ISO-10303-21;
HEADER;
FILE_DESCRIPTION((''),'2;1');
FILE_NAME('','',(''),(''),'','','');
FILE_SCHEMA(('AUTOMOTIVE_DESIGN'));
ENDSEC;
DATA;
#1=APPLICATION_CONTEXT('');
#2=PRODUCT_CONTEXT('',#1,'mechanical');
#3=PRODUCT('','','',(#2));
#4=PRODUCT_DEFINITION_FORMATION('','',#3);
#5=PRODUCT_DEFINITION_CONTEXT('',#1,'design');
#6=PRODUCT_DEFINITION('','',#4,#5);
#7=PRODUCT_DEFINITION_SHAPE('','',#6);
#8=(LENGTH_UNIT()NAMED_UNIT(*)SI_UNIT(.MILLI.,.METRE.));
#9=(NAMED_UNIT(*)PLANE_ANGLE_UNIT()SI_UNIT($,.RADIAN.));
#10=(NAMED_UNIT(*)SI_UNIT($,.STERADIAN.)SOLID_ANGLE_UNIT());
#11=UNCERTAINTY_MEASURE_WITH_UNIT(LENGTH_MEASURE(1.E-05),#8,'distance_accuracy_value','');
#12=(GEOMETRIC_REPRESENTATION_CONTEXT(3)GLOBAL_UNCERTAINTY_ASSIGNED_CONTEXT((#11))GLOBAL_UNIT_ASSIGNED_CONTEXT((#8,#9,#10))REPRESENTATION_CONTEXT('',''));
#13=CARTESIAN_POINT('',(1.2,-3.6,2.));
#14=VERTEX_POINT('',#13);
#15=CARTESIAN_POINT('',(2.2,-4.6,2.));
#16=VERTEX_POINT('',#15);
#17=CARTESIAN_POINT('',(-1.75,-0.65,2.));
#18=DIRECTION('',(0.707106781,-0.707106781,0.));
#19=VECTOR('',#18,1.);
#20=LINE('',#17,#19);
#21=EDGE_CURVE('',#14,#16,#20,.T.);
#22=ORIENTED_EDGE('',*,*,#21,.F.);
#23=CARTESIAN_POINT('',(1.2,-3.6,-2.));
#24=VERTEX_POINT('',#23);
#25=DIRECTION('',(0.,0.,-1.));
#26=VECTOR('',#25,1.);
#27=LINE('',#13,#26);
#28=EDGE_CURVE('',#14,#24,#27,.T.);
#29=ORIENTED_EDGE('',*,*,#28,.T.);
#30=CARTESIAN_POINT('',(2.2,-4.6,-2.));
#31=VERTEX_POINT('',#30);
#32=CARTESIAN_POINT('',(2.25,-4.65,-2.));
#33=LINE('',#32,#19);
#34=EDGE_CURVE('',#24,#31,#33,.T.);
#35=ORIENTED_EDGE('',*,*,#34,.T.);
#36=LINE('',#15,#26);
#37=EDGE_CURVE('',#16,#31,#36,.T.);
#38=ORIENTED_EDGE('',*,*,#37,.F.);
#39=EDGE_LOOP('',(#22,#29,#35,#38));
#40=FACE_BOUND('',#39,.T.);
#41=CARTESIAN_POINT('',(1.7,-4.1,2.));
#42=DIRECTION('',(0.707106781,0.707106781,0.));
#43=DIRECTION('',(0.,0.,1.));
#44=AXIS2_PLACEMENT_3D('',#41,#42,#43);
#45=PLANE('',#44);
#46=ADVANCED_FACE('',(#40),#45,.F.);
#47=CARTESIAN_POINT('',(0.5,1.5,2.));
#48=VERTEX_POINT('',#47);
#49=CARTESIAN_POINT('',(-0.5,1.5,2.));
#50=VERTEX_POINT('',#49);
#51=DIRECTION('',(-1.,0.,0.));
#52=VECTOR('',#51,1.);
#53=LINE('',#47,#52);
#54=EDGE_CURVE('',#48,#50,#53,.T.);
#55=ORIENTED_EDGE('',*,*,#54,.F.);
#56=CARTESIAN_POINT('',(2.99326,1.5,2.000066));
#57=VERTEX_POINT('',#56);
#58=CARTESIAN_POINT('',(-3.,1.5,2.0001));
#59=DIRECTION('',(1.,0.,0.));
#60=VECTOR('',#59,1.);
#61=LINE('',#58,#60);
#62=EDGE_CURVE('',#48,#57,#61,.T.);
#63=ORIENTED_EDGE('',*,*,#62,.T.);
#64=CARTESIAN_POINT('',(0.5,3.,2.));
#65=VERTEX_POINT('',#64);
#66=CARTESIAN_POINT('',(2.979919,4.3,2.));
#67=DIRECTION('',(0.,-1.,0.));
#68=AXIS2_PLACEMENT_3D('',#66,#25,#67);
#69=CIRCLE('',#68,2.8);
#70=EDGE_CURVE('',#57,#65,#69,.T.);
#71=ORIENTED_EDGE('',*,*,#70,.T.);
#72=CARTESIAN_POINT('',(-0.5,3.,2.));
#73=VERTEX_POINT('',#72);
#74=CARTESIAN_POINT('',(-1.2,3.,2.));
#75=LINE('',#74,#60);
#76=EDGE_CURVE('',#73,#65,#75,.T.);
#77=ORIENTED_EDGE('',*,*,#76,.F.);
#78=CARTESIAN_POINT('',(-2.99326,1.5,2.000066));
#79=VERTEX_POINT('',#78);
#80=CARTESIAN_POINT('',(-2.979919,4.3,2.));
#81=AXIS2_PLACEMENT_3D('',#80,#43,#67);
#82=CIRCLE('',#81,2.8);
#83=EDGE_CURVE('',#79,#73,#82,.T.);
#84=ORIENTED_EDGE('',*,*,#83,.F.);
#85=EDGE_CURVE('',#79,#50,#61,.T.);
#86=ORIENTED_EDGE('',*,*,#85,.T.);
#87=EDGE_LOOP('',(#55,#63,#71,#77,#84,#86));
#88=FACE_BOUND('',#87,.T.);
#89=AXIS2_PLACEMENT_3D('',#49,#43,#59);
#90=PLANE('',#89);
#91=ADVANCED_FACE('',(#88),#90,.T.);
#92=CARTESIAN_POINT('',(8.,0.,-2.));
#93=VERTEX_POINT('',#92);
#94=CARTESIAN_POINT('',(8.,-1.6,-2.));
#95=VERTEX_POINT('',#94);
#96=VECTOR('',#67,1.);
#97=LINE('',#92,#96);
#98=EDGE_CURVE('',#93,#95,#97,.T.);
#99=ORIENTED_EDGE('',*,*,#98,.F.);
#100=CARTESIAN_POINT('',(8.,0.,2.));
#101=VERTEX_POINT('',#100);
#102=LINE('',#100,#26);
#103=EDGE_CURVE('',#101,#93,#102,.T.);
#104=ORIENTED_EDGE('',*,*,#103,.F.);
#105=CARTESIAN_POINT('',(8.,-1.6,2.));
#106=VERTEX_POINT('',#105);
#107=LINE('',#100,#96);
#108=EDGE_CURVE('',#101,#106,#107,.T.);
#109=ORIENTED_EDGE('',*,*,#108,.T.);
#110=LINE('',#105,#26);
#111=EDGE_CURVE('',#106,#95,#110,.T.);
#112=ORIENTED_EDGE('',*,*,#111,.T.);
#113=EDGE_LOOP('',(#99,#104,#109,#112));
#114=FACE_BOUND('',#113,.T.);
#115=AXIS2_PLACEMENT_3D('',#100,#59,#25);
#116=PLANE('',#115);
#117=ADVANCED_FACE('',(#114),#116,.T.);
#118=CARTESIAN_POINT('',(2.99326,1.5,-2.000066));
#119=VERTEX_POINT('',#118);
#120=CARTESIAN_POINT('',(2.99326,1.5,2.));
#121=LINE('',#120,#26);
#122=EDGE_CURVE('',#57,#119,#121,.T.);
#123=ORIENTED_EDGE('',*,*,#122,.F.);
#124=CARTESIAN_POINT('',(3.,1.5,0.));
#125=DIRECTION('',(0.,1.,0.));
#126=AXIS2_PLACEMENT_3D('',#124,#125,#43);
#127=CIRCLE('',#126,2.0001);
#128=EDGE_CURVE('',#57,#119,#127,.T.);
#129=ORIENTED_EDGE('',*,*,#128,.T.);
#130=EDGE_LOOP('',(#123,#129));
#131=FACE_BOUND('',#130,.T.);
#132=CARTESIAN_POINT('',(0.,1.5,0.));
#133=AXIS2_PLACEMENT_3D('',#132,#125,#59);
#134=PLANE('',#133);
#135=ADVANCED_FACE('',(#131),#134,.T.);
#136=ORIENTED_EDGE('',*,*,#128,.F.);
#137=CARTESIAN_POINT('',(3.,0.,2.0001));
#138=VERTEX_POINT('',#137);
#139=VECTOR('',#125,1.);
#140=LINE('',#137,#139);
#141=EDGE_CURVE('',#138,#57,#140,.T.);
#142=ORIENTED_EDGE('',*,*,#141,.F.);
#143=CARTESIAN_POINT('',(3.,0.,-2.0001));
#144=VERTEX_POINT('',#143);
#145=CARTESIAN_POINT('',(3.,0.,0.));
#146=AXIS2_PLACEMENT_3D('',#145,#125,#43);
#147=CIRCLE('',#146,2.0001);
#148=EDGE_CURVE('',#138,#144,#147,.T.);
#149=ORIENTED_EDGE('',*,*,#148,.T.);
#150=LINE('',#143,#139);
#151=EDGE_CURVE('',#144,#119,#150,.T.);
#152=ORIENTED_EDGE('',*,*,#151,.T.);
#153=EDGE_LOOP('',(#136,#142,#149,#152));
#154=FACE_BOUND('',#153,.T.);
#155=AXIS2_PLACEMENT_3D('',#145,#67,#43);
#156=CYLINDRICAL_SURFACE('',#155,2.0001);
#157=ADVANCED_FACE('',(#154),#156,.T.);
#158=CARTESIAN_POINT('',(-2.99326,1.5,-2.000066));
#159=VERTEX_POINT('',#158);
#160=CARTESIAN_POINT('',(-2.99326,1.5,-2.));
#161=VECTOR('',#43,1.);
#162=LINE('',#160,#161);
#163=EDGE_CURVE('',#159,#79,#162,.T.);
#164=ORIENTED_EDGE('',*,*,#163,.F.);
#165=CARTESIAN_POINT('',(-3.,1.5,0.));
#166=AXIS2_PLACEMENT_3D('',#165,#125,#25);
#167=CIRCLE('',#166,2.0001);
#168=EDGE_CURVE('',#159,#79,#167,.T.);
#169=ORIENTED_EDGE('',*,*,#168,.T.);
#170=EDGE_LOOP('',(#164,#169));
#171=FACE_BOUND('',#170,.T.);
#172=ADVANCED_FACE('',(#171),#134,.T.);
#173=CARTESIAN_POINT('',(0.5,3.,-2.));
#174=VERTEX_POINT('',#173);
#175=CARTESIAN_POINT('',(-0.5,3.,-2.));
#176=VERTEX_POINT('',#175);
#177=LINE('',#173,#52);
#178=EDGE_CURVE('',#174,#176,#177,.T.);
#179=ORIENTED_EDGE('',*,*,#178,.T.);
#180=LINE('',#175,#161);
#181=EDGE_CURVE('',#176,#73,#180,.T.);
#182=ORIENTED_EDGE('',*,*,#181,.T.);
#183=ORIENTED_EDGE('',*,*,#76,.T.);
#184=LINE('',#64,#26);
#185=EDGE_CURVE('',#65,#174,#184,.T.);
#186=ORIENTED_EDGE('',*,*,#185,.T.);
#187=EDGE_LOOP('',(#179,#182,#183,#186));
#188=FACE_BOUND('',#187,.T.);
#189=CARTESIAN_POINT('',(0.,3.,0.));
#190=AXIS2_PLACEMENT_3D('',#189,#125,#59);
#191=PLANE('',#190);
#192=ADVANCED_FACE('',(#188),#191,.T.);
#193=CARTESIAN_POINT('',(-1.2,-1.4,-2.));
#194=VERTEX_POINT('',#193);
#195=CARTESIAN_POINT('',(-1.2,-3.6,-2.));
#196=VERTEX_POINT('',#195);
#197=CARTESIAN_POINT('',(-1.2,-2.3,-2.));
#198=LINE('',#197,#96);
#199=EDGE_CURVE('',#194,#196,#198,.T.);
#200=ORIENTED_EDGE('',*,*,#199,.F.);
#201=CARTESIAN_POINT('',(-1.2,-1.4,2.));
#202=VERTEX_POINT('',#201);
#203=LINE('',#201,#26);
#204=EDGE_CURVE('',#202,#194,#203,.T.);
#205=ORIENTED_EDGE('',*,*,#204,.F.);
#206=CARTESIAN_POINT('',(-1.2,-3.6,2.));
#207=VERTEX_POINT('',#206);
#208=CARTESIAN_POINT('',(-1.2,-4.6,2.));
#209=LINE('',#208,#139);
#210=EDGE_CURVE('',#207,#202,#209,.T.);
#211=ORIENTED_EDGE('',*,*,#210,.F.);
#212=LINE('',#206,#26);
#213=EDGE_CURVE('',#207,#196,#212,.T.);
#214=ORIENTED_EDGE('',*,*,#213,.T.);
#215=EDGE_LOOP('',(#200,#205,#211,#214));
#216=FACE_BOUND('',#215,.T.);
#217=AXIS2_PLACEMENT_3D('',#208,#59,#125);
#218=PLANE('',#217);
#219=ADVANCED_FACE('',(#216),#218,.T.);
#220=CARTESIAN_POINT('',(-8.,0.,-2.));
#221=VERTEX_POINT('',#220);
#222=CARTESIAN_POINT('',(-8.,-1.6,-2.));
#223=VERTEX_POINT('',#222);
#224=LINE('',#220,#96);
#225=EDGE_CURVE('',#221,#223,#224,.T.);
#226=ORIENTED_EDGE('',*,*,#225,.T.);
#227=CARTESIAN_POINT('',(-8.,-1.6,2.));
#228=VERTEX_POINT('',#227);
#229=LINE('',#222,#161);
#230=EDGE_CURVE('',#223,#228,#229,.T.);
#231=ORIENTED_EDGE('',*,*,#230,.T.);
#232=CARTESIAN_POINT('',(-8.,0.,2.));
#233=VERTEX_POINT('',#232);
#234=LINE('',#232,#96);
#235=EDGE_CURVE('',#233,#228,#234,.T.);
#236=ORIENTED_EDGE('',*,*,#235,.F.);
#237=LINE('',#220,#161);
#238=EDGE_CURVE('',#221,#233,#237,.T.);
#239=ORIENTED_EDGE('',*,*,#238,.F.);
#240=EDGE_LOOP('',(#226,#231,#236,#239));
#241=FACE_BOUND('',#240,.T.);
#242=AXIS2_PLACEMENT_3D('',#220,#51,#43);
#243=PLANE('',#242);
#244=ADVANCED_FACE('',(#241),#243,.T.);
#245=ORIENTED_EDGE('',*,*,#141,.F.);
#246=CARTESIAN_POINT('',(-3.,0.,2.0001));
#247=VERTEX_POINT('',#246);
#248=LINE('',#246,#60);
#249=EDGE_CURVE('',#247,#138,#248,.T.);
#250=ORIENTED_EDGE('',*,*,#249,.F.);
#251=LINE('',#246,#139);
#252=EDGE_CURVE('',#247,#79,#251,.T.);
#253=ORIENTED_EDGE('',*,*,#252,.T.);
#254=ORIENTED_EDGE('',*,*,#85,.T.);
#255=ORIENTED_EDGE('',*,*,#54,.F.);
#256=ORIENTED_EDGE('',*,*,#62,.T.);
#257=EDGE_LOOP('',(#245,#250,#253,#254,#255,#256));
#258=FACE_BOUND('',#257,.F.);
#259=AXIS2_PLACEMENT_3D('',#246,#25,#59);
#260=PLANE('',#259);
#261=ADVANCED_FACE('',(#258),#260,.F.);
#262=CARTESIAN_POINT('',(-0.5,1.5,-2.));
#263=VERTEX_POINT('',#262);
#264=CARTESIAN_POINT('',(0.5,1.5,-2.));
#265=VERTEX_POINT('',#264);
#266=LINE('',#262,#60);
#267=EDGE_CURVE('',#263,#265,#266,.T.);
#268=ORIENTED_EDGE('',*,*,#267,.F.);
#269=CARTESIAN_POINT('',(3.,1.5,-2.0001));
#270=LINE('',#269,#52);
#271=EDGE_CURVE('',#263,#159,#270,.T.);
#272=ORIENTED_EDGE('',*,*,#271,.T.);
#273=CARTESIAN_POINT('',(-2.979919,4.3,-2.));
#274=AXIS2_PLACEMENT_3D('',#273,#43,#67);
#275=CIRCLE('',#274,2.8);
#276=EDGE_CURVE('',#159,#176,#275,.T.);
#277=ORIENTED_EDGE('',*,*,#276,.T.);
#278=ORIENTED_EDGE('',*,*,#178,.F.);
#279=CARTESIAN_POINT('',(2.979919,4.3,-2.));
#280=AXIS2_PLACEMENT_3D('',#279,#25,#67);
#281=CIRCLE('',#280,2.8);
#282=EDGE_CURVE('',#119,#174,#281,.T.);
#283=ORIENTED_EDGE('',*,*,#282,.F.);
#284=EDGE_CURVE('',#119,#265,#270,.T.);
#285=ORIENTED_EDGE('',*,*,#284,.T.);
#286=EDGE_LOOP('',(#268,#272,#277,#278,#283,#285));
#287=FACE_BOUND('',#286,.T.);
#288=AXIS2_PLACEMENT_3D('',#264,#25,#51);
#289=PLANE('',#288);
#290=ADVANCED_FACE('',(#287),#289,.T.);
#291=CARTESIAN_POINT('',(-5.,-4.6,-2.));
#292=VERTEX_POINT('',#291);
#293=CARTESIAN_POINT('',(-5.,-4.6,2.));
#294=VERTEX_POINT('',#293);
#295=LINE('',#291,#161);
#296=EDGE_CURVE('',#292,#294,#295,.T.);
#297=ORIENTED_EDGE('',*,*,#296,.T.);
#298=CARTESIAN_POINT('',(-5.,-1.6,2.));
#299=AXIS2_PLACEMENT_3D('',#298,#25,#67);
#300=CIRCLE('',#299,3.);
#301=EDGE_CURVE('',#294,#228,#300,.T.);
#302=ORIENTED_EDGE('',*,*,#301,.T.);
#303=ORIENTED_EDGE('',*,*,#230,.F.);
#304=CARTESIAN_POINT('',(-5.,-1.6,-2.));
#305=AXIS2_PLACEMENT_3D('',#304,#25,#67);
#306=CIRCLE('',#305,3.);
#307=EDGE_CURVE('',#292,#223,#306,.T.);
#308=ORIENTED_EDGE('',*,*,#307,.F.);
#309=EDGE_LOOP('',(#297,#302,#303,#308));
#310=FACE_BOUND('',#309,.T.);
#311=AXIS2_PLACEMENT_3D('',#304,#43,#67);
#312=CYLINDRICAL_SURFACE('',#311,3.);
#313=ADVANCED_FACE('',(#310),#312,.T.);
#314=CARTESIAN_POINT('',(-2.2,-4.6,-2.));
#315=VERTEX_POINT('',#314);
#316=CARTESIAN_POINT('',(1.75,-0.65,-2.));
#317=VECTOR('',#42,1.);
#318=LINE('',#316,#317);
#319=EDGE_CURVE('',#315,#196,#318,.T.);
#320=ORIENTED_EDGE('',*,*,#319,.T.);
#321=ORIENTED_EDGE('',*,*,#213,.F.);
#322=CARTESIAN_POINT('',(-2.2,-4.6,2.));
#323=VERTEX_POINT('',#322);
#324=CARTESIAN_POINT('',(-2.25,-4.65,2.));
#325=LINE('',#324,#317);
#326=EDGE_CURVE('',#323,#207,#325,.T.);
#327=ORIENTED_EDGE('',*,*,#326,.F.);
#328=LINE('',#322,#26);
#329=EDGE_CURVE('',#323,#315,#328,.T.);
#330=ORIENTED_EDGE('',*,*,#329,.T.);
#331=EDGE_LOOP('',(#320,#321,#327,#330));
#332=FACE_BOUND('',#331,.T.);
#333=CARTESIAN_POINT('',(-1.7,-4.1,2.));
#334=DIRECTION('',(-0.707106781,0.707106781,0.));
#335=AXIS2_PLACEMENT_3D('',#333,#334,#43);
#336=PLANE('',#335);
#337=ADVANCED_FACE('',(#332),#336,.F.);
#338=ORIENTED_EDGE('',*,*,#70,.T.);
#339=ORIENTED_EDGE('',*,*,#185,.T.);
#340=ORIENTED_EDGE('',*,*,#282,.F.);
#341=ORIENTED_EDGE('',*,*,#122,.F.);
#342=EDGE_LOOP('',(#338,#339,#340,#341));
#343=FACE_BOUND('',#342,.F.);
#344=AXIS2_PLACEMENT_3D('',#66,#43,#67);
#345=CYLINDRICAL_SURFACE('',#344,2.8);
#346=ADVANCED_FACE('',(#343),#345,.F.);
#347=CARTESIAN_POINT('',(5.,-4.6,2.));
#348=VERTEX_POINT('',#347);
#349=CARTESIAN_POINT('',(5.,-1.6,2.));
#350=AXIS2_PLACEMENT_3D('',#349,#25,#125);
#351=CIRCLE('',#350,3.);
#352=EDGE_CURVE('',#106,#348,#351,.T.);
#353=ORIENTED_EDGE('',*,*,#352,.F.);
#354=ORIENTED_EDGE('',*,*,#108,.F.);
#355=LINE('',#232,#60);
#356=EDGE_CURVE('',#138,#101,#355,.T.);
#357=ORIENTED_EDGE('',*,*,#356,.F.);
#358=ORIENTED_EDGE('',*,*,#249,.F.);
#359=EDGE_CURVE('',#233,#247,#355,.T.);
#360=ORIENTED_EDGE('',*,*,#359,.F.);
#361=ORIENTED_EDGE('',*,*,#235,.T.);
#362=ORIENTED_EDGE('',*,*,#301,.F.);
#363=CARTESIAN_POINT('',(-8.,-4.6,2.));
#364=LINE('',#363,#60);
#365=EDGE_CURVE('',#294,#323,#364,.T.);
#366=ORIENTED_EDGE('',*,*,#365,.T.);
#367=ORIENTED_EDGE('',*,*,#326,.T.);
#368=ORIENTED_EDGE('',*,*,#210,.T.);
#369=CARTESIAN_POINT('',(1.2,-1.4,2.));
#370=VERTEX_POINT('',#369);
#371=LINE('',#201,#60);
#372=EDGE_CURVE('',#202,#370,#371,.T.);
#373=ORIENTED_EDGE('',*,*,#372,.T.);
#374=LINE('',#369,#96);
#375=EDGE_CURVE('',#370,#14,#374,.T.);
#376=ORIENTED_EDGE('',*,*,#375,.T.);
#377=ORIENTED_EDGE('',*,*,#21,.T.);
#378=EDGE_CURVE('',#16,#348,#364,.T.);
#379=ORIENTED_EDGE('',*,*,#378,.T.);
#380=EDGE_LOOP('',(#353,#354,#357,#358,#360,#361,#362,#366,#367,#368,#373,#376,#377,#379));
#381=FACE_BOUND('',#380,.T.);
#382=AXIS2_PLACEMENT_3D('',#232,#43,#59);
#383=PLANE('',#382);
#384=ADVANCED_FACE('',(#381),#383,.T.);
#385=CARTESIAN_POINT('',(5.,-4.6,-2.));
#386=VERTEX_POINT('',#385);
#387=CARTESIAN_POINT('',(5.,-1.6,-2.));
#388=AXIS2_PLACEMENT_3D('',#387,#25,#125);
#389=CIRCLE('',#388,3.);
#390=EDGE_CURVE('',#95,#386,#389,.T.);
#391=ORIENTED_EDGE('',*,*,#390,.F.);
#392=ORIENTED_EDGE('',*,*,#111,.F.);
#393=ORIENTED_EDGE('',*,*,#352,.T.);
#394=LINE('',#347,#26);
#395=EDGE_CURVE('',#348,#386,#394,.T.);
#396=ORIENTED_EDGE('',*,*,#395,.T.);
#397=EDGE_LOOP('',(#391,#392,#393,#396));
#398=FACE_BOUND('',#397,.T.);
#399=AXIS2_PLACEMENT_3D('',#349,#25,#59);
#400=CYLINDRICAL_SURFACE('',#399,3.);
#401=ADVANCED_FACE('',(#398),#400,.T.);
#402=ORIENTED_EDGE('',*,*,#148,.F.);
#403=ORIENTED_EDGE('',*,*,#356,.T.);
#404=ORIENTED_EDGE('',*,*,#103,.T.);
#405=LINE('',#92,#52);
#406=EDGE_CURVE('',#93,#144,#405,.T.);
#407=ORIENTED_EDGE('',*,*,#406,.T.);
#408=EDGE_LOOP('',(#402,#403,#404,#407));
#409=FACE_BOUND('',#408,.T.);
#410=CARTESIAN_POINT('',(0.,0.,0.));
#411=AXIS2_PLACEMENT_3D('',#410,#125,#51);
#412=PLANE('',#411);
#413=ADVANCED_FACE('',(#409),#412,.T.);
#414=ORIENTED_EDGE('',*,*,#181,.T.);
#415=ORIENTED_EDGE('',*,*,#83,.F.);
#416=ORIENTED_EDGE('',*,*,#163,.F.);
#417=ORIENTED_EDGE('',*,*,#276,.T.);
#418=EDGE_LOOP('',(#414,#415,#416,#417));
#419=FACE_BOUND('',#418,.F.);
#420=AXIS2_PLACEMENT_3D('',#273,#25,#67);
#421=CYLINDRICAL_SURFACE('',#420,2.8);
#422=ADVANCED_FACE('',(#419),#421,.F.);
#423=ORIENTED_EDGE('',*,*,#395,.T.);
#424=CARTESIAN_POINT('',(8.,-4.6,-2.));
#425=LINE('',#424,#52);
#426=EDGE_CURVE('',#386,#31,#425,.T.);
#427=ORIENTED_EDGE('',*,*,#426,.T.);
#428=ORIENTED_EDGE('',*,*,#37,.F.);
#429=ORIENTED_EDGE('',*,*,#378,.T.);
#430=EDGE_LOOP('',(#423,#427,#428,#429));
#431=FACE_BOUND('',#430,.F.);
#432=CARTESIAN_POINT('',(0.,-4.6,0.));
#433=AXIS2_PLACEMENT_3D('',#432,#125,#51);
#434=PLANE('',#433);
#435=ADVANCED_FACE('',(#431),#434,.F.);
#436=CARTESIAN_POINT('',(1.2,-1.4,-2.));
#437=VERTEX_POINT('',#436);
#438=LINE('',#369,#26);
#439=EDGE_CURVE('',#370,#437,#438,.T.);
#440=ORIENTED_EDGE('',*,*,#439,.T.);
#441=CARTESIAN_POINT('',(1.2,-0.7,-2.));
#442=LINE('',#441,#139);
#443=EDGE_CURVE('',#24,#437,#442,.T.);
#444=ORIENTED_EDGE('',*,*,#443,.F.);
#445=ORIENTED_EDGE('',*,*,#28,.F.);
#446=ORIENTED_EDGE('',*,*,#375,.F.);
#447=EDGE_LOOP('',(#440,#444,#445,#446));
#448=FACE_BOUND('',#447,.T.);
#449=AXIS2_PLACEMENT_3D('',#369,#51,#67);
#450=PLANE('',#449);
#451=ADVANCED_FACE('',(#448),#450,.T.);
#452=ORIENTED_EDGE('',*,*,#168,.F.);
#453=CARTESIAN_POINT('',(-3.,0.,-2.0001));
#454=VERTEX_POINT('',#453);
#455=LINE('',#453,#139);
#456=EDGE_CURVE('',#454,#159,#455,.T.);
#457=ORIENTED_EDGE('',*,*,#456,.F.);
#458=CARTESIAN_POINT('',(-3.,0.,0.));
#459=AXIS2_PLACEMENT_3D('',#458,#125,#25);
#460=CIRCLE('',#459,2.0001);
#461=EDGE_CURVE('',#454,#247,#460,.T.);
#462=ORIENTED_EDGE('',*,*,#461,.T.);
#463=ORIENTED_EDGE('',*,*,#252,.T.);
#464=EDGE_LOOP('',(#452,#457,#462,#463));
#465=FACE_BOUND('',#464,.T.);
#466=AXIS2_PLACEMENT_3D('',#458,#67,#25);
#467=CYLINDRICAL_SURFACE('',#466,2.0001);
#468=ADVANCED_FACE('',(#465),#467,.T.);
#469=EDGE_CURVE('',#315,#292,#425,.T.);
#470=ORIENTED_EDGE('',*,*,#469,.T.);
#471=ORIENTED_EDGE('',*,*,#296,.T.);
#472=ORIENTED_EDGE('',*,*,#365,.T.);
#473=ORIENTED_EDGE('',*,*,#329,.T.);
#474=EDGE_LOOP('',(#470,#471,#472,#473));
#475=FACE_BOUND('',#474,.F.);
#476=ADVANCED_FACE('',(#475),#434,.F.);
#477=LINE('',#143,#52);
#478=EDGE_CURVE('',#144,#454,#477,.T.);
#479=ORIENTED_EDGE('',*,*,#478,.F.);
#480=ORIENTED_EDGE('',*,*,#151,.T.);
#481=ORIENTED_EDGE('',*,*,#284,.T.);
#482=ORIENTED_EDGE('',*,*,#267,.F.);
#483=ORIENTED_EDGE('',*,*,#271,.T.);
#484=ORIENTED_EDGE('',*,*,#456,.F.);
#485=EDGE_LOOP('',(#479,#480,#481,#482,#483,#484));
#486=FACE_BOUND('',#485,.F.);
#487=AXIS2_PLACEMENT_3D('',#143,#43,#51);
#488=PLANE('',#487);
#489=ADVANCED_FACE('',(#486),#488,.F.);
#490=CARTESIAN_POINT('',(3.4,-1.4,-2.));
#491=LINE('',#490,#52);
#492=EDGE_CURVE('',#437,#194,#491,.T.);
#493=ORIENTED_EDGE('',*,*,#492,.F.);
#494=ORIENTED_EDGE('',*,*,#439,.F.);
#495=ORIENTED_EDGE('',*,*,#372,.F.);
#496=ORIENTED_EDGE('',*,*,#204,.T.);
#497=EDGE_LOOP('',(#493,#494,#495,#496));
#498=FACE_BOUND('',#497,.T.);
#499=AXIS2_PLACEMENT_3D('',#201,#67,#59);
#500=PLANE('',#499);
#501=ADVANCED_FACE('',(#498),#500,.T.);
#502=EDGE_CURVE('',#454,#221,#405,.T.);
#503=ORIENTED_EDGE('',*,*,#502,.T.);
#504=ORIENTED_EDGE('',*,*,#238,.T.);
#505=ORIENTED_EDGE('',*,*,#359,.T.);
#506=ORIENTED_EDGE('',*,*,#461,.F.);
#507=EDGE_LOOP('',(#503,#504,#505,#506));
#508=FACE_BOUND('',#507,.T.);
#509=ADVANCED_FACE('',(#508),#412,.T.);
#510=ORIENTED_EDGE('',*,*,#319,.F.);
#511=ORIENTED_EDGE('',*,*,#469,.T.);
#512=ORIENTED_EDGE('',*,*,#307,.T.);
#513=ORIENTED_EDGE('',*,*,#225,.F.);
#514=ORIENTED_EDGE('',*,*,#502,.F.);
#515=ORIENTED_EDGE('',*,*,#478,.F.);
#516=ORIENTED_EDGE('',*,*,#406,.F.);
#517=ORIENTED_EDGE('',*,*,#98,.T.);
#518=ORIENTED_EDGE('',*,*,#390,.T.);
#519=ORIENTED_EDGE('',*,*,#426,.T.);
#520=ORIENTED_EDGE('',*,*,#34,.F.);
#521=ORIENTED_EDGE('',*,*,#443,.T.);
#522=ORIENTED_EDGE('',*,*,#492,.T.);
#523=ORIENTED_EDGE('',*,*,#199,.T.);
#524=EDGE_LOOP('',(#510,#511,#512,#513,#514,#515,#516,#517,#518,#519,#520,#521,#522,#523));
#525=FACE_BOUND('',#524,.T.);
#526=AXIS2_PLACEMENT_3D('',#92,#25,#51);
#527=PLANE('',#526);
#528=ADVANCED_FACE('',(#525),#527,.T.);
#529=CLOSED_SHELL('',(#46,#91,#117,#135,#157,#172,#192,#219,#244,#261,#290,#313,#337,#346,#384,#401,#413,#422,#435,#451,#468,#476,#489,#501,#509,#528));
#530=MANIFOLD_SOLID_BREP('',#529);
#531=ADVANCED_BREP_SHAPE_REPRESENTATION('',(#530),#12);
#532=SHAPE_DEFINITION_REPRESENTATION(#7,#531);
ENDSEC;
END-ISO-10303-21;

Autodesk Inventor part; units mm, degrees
ref_plane "YZ Plane" through (0, 0, 0) normal (1, 0, 0) x (0, 1, 0)
ref_plane "XZ Plane" through (0, 0, 0) normal (0, 1, 0) x (-1, 0, 0)
ref_plane "XY Plane" through (0, 0, 0) normal (0, 0, 1) x (1, 0, 0)
sketch "Sketch1" plane through (0, 0, 0) normal (0, 1, 0) x (-1, 0, 0)
  line L0 (8, 2) -> (-8, 2)
  line L1 (-8, 2) -> (-8, -2)
  line L2 (-8, -2) -> (8, -2)
  line L3 (8, -2) -> (8, 2)
  line L4 (11.2, 0) -> (-11.2, 0) construction
  line L5 (0, -2.8) -> (0, 2.8) construction
  point P0 (0, 0)
  dimension "d0" = 16
  dimension "d1" = 4
extrude "Extrusion1" add sketch "Sketch1" against normal blind 4.6
sketch "Sketch2" plane through (-8, 0, 2) normal (0, 0, 1) x (1, 0, 0)
  line L0 (6.8, -1.4) -> (9.2, -1.4)
  line L1 (9.2, -1.4) -> (9.2, -4.6)
  line L2 (9.2, -4.6) -> (6.8, -4.6)
  line L3 (6.8, -4.6) -> (6.8, -1.4)
  line L4 (16, -4.6) -> (0, -4.6) projected
  point P0 (8, 0)
  point P1 (8, -4.6)
  point P2 (8, -4.6)
  dimension "d4" = 2.4
  dimension "d5" = 3.2
extrude "Extrusion2" cut sketch "Sketch2" against normal through all
chamfer "Chamfer1" distance 1 angle 45 2 edges at (-1.2, -4.6, 0) (1.2, -4.6, 0)
fillet "Fillet1" radius 3 2 edges at (-8, -4.6, 0) (8, -4.6, 0)
sketch "Sketch3" plane through (0, 0, 0) normal (0, 1, 0) x (1, 0, 0)
  line L0 (-3, 0) -> (3, 0) construction
  line L1 (-3, -2.0001) -> (3, -2.0001)
  line L2 (3, 2.0001) -> (-3, 2.0001)
  arc A0 (-3, 2.0001) -> (-3, -2.0001) centre (-3, 0) ccw
  arc A1 (3, -2.0001) -> (3, 2.0001) centre (3, 0) ccw
  point P0 (0, 0)
  dimension "d12" = 3
extrude "Extrusion3" add sketch "Sketch3" along normal blind 1.5
sketch "Sketch4" plane through (0, 1.5, 0) normal (0, 1, 0) x (1, 0, 0)
  line L0 (-1.2, -2) -> (1.2, -2) projected
  line L1 (0.5, 2) -> (-0.5, 2)
  line L2 (-0.5, 2) -> (-0.5, -2)
  line L3 (-0.5, -2) -> (0.5, -2)
  line L4 (0.5, -2) -> (0.5, 2)
  line L5 (0.5, 2) -> (-0.5, -2) construction
  line L6 (-0.5, 2) -> (0.5, -2) construction
  point P0 (0, 0)
  dimension "d15" = 1
extrude "Extrusion4" add sketch "Sketch4" along normal blind 1.5
fillet "Fillet2" radius 2.8 2 edges at (0.5, 1.5, 0) (-0.5, 1.5, 0)
properties part number "Sliding_switch"
